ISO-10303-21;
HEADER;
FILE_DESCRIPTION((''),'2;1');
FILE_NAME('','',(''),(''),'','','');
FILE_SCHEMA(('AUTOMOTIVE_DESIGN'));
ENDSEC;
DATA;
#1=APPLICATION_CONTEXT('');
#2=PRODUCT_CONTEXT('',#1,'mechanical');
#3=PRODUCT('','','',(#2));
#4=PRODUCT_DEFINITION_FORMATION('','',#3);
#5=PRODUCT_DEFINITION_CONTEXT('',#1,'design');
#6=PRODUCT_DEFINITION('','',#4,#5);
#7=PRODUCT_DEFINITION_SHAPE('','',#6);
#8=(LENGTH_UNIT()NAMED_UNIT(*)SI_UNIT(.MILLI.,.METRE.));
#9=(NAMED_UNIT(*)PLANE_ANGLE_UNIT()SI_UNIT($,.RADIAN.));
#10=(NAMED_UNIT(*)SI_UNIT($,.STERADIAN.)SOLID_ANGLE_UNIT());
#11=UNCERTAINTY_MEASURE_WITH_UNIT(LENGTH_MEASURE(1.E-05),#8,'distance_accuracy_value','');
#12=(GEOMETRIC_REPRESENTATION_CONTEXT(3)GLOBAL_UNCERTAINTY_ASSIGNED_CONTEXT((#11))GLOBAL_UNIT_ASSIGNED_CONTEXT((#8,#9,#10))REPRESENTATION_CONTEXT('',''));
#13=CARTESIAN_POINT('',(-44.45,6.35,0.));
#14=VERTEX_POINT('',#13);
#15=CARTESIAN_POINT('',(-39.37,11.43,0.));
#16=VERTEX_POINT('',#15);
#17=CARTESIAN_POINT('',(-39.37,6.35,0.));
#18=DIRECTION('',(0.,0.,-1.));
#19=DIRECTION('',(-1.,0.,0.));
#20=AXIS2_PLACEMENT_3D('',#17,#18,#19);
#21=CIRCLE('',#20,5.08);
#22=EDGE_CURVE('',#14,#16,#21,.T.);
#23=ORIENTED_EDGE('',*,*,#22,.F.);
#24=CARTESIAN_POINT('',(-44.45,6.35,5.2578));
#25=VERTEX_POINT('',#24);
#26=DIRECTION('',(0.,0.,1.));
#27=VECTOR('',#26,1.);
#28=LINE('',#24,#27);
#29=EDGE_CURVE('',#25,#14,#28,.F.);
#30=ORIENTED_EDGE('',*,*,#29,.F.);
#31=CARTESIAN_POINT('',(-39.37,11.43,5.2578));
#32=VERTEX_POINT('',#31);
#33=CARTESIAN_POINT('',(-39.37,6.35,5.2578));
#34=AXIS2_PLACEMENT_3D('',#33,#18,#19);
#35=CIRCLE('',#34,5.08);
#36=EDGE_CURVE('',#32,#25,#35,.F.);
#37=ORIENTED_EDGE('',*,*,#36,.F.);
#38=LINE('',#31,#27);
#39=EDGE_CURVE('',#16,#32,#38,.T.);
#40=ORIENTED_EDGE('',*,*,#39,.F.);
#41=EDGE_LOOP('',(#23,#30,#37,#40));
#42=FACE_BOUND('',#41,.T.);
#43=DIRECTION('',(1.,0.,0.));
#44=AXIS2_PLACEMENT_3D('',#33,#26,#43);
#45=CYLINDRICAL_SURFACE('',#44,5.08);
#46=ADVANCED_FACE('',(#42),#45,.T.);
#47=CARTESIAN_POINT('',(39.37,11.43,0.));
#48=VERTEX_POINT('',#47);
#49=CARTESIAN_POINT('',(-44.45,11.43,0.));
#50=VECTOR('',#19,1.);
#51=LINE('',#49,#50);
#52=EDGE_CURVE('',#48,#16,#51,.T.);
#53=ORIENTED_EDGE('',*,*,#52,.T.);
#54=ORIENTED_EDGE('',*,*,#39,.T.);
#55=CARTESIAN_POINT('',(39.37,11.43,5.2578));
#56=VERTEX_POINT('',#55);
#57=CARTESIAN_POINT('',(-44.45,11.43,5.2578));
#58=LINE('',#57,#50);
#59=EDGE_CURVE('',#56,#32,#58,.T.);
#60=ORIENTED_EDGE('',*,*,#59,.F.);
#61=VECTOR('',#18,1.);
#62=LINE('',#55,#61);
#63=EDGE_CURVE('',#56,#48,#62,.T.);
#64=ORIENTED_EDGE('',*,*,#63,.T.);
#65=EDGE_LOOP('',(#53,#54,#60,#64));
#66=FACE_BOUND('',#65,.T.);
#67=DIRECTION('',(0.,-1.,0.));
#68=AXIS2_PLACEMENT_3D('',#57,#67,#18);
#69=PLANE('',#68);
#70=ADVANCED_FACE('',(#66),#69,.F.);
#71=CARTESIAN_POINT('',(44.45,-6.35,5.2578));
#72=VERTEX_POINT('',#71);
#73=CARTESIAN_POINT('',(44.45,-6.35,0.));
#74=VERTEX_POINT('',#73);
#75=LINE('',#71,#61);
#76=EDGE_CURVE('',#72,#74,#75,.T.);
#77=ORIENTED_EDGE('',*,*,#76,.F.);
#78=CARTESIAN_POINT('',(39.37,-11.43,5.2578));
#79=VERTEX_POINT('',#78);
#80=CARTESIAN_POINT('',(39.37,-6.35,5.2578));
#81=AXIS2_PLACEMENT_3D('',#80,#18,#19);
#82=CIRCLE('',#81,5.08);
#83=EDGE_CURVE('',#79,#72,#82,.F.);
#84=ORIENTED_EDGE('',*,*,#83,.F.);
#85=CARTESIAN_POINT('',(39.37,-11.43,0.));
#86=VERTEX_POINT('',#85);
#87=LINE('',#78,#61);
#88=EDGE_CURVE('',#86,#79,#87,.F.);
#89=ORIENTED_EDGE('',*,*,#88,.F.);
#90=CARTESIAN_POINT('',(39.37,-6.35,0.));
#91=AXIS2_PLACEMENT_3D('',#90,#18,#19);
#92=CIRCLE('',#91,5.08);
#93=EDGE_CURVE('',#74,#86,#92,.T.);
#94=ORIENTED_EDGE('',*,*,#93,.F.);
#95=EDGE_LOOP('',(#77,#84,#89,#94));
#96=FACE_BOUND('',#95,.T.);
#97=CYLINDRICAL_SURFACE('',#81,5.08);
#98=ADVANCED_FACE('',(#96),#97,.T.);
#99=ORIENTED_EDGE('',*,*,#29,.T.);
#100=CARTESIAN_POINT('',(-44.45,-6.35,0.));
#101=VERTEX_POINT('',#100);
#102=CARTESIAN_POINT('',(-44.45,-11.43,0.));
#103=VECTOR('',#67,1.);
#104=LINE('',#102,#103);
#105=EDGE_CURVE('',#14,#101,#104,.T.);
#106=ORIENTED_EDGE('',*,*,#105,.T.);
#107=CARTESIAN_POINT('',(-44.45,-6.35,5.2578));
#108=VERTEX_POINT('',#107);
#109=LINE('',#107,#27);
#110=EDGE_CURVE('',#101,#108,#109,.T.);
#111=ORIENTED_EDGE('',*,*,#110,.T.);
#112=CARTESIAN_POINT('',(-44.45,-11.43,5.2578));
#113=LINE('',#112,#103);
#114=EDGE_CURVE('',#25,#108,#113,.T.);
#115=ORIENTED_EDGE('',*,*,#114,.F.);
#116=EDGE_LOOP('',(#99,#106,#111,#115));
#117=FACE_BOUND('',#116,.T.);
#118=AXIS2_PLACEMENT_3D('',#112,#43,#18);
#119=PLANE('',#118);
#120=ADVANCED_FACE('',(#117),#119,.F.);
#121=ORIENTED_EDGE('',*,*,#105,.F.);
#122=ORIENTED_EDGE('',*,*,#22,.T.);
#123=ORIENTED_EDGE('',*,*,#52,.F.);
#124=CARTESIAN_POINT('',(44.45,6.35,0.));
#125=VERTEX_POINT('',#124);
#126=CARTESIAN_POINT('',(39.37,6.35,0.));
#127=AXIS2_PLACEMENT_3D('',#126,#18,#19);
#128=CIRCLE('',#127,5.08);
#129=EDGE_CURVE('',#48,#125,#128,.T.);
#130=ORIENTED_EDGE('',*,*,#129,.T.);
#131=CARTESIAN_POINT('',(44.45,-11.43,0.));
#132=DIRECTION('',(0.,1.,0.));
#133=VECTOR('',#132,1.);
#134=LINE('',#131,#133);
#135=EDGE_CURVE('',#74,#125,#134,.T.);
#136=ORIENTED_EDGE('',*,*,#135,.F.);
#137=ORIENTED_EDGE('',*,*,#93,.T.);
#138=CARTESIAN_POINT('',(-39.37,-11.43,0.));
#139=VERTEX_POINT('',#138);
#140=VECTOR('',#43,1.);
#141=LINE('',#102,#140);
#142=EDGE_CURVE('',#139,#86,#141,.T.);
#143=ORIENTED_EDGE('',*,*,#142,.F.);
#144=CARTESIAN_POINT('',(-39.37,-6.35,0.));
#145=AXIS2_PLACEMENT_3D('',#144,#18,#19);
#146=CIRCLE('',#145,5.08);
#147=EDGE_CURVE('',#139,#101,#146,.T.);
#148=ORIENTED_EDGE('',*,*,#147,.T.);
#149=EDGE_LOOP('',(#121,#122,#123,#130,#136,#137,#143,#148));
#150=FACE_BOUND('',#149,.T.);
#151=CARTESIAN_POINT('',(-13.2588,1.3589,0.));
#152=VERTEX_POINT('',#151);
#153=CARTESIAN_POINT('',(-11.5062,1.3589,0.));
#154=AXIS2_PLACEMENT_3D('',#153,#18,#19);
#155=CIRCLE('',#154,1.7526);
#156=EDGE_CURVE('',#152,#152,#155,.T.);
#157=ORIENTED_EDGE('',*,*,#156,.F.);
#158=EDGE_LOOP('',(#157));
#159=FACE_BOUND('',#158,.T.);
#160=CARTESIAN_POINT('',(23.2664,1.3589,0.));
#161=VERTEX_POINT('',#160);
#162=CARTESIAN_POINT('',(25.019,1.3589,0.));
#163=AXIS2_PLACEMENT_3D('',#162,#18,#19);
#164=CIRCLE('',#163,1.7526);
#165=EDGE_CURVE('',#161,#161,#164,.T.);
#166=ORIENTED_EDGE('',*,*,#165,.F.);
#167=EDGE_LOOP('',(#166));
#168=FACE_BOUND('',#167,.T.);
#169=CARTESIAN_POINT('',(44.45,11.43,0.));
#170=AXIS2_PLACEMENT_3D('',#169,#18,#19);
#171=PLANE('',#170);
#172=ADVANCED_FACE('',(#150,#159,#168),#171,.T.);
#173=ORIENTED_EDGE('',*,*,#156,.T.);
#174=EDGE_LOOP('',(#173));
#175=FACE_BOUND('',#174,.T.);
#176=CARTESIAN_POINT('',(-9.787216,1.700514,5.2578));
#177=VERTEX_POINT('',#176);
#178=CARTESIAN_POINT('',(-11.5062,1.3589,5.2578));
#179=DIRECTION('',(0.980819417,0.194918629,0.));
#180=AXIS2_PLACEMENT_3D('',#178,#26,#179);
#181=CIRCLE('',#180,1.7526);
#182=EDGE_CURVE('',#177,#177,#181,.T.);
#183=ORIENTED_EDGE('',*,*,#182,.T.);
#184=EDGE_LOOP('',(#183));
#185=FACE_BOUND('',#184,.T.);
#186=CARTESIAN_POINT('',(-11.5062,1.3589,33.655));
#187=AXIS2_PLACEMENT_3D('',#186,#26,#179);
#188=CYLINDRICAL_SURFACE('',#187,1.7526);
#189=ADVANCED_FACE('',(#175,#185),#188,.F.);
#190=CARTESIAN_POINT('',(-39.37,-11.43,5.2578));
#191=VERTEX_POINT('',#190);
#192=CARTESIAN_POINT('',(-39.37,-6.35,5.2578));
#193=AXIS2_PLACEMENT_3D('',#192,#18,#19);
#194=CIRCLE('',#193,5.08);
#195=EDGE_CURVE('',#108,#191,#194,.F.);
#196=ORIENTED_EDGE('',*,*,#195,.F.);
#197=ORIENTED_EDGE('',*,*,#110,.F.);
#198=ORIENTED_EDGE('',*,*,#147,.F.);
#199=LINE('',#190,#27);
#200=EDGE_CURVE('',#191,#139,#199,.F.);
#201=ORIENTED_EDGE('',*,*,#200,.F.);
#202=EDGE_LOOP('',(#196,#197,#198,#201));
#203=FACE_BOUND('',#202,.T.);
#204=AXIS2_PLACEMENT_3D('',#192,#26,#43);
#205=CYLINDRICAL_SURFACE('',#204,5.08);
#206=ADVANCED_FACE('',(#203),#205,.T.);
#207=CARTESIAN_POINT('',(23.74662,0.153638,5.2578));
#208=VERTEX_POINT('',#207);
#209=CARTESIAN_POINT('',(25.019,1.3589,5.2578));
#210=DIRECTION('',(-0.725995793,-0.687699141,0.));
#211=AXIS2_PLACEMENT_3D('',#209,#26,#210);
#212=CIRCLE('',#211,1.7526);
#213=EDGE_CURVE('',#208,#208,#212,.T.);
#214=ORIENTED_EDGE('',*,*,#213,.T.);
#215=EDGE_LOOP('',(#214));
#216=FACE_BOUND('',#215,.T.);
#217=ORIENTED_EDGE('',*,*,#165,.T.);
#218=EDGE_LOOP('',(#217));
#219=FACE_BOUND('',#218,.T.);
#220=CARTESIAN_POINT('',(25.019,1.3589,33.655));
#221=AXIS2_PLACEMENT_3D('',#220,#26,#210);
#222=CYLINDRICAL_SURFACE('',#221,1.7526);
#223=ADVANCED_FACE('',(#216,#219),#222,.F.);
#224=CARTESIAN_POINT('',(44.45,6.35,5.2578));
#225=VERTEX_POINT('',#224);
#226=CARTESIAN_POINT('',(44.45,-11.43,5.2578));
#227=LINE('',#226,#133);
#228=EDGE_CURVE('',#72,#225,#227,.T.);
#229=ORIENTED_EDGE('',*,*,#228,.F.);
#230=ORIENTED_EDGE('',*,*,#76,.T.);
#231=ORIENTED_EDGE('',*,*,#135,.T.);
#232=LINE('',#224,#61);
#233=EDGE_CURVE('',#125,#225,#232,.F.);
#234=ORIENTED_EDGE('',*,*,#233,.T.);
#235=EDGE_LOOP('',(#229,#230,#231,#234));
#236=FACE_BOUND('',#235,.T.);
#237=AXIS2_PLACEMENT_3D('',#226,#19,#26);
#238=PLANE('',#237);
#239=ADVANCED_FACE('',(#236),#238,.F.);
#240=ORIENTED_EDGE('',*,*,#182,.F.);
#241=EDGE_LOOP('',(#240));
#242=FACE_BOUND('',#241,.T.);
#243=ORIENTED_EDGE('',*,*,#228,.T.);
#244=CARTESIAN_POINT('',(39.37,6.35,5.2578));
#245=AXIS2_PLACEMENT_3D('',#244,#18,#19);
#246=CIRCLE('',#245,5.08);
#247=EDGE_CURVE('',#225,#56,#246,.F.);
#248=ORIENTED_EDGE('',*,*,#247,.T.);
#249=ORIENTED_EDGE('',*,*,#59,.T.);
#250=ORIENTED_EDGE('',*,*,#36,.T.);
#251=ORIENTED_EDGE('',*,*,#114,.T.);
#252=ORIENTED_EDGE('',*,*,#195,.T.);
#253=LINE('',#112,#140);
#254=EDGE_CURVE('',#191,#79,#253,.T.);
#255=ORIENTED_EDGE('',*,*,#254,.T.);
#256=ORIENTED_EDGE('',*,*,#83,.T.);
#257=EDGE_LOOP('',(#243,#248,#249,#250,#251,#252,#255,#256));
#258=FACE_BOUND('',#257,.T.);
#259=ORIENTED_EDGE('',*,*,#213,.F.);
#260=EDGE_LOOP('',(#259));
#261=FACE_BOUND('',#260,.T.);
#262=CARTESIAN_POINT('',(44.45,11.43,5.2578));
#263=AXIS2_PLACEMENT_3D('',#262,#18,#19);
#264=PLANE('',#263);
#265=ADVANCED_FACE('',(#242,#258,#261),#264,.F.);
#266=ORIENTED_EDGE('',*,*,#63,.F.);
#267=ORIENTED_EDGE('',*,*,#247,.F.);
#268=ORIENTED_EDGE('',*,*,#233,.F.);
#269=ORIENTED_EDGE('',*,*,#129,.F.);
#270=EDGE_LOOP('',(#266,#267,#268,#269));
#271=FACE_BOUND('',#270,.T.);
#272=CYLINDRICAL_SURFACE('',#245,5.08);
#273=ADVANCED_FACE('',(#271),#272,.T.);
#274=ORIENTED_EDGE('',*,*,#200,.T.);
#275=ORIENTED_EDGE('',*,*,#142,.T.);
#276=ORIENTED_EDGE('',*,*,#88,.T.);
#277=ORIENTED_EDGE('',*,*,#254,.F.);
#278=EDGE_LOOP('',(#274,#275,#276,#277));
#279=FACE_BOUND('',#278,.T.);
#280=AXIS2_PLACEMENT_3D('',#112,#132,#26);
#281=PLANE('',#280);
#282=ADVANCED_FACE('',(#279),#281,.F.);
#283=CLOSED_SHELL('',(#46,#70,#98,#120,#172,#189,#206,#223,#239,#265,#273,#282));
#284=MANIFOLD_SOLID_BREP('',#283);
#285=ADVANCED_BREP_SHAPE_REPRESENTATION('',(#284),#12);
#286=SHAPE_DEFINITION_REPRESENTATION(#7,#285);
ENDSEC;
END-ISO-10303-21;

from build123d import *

# Parameters (mm, degrees)
SKETCH1_W           = 88.9
SKETCH1_H           = 22.86
BOSS_EXTRUDE1_DEPTH = 5.2578
FILLET1_R           = 5.08
FILLET2_R           = 5.08
FILLET3_R           = 5.08
FILLET4_R           = 5.08
CAVITY1_OUTLINE_R   = 1.7526
CAVITY1_DEPTH       = 5.2578


# Read off the part's stored shape, not the designer's step: Cavity1
with BuildPart() as part:
    # Sketch1 → Boss-Extrude1 (new body)
    with BuildSketch(Plane.XY):
        Rectangle(SKETCH1_W, SKETCH1_H)
    extrude(amount=BOSS_EXTRUDE1_DEPTH)

    # Fillet1
    fillet1_edges = [part.edges().sort_by_distance(p)[0] for p in [
        (-44.45, 11.43, 2.6289),
    ]]
    fillet(fillet1_edges, radius=FILLET1_R)

    # Fillet2
    fillet2_edges = [part.edges().sort_by_distance(p)[0] for p in [
        (44.45, 11.43, 2.6289),
    ]]
    fillet(fillet2_edges, radius=FILLET2_R)

    # Fillet3
    fillet3_edges = [part.edges().sort_by_distance(p)[0] for p in [
        (44.45, -11.43, 2.6289),
    ]]
    fillet(fillet3_edges, radius=FILLET3_R)

    # Fillet4
    fillet4_edges = [part.edges().sort_by_distance(p)[0] for p in [
        (-44.45, -11.43, 2.6289),
    ]]
    fillet(fillet4_edges, radius=FILLET4_R)

    # Cavity1 outline → Cavity1 (cut)
    with BuildSketch(Plane.XY):
        with Locations((25.019, 1.3589)):
            Circle(CAVITY1_OUTLINE_R)
        with Locations((-11.5062, 1.3589)):
            Circle(CAVITY1_OUTLINE_R)
    extrude(amount=CAVITY1_DEPTH, mode=Mode.SUBTRACT)


solid = part.part
